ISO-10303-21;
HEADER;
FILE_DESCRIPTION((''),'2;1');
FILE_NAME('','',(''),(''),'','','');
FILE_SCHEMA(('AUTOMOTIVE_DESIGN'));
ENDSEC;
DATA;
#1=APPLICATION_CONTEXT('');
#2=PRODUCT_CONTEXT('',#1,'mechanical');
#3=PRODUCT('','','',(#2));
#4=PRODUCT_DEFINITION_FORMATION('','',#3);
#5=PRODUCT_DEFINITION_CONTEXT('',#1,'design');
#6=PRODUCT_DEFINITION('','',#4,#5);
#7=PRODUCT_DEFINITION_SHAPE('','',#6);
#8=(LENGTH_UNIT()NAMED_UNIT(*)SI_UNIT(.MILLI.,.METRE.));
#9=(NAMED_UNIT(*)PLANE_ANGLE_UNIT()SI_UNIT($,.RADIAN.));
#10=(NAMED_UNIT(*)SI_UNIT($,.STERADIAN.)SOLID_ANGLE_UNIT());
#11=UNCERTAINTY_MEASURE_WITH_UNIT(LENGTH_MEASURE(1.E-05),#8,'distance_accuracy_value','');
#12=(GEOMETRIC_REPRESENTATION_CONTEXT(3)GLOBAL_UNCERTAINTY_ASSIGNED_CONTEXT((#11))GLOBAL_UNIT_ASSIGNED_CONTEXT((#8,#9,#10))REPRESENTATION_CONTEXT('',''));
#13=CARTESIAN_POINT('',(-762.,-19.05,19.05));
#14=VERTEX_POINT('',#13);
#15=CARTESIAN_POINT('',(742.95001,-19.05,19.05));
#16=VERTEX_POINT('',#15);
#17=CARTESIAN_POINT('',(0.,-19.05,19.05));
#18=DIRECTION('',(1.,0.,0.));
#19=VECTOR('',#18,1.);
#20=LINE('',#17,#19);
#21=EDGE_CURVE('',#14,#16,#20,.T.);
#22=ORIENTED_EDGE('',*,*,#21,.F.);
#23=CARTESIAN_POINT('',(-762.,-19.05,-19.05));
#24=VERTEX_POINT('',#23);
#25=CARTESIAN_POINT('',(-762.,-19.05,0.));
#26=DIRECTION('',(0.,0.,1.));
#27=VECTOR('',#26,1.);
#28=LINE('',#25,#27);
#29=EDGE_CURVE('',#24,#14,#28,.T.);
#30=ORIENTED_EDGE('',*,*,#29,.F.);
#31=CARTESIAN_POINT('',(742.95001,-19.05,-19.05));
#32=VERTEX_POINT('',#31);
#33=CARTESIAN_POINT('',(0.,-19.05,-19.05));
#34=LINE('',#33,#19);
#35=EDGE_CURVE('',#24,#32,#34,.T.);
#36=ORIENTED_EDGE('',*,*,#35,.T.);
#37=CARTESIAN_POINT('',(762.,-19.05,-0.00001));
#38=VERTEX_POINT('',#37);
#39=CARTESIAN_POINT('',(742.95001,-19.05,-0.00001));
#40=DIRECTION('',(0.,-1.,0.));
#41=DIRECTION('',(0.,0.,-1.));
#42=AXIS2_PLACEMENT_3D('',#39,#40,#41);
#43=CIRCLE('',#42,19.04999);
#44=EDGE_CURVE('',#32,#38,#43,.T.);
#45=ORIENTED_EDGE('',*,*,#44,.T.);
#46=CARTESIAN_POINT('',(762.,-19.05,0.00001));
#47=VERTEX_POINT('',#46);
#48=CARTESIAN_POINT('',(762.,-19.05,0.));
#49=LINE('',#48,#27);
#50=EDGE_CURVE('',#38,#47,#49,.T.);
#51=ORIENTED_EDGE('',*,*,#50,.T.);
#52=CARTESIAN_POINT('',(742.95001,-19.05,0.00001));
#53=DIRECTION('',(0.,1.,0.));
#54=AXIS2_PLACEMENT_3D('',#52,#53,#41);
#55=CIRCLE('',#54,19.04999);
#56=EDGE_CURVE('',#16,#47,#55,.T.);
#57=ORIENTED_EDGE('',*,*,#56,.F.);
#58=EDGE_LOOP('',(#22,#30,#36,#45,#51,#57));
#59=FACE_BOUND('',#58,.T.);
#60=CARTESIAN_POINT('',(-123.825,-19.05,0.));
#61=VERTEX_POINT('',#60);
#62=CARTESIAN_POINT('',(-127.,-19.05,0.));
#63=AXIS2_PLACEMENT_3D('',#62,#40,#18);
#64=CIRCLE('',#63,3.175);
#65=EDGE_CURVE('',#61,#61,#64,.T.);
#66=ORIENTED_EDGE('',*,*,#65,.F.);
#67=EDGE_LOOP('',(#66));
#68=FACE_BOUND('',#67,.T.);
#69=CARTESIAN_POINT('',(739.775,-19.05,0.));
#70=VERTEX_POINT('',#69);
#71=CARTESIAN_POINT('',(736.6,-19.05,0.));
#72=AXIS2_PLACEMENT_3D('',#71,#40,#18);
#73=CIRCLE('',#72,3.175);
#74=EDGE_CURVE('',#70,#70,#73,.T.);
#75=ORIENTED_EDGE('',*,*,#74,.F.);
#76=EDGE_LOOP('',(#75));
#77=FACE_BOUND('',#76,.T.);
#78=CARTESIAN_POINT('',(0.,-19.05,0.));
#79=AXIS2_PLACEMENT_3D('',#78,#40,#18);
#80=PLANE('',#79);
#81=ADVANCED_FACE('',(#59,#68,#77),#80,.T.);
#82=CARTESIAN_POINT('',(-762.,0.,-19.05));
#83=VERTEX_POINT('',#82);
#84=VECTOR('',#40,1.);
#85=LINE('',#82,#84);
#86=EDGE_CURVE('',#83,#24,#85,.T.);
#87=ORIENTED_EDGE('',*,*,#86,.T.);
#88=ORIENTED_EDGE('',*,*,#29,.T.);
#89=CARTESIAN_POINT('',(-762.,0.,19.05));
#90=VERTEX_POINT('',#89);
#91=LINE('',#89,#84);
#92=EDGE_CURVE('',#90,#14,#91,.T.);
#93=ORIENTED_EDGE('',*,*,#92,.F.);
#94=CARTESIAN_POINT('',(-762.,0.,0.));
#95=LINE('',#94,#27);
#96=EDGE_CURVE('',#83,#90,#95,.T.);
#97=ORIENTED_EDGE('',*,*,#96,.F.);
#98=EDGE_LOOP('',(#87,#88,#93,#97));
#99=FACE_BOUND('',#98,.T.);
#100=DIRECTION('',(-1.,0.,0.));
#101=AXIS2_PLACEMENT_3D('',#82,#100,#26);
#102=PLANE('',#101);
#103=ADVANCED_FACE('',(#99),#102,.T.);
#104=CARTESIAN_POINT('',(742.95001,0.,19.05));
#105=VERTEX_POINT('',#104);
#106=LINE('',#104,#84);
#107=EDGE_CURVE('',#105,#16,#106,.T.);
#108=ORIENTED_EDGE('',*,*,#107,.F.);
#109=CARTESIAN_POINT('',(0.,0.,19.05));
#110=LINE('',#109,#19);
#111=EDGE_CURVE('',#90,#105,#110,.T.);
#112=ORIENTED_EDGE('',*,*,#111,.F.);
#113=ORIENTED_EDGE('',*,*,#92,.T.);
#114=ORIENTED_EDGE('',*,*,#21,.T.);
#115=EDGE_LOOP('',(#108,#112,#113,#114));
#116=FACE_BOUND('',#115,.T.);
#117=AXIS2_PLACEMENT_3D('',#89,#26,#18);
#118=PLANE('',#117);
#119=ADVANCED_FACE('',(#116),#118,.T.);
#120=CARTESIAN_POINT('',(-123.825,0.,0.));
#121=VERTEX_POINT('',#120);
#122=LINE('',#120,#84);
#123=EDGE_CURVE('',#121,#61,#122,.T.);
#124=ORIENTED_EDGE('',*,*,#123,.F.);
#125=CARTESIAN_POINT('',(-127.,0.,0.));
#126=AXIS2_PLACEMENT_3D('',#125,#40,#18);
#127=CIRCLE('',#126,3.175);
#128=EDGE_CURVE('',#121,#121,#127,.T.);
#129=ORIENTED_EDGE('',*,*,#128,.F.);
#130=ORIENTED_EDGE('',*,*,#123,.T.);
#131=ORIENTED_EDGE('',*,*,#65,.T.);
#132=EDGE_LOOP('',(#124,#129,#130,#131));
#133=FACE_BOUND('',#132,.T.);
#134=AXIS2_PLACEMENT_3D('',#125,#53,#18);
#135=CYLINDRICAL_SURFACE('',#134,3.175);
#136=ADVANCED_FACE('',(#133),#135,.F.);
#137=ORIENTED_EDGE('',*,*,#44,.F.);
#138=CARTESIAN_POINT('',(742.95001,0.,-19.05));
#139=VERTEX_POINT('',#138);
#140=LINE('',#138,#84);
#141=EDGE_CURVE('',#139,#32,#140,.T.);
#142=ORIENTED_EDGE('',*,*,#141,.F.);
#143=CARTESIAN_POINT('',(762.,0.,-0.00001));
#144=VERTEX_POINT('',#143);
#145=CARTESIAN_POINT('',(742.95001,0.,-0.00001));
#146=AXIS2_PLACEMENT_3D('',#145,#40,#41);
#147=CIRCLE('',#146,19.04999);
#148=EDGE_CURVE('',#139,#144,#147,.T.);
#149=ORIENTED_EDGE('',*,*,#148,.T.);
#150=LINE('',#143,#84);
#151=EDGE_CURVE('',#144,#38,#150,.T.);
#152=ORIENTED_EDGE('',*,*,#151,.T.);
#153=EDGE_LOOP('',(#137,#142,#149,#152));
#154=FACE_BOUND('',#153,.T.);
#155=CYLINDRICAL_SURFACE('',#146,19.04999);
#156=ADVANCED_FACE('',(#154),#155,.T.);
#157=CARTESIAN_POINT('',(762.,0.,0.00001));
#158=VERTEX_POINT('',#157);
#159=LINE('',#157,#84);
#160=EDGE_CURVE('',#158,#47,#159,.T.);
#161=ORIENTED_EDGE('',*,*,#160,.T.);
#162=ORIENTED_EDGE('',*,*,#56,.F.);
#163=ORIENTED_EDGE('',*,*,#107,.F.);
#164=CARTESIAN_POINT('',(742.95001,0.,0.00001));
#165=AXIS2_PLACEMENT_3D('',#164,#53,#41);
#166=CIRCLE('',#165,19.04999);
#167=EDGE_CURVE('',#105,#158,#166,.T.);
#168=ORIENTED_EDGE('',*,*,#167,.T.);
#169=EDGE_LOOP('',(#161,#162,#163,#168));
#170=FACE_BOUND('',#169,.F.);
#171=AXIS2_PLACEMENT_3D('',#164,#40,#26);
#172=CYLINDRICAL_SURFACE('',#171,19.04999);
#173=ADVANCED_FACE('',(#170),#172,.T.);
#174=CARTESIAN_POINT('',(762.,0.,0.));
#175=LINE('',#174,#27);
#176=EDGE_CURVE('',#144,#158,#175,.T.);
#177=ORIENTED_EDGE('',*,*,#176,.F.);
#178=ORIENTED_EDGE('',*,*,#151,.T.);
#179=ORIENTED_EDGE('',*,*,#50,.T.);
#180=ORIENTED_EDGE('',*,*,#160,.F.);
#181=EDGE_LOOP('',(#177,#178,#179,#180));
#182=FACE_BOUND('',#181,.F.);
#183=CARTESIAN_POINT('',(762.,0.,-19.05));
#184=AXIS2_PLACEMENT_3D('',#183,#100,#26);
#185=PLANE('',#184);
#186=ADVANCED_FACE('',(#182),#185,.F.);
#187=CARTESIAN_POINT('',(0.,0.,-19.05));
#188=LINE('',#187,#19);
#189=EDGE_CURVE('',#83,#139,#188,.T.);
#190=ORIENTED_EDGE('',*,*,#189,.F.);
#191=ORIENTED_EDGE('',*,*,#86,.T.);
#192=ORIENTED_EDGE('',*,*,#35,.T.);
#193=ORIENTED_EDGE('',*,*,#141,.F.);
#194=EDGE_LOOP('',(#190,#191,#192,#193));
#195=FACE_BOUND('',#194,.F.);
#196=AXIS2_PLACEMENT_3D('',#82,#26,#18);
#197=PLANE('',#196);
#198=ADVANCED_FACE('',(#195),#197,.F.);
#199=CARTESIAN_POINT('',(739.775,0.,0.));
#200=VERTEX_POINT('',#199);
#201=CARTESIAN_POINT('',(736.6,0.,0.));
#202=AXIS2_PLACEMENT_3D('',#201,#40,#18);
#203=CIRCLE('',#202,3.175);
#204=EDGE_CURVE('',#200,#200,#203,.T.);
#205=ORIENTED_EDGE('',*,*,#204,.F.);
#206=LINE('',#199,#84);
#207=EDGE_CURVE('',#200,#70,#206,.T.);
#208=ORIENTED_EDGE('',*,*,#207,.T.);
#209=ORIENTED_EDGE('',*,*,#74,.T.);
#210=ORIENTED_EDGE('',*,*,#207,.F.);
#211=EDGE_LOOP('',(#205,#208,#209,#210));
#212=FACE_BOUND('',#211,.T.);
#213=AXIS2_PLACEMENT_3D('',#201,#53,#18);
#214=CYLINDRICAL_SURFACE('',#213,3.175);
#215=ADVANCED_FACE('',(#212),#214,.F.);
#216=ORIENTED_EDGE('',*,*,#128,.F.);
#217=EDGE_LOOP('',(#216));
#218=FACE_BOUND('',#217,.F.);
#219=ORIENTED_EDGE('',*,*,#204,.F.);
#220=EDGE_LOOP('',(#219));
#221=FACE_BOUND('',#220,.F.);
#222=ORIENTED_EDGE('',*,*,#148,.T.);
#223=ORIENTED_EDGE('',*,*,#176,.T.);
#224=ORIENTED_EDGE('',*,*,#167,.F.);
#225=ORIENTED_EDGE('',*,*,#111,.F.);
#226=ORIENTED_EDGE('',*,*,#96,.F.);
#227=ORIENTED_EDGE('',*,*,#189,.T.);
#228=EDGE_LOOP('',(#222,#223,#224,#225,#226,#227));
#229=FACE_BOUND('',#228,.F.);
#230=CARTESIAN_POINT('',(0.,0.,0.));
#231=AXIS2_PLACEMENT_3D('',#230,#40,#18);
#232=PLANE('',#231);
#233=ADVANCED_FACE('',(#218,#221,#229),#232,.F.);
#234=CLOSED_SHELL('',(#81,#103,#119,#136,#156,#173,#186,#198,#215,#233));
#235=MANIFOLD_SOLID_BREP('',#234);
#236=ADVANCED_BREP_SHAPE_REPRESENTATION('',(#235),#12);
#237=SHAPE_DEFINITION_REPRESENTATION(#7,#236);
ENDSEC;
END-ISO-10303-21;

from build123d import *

# Parameters (mm, degrees)
F0_W     = 1524
F0_H     = 38.1
F0_R     = 3.175
F1_DEPTH = 19.05
F2_R     = 19.04999


# Not quite as in the source:
# - a fillet or chamfer is up to 0.001 mm smaller than in the source, because OpenCascade refuses the exact size


with BuildPart() as f1:
    # F0 (on Front) → F1 (new body)
    with BuildSketch(Plane.XZ):
        Rectangle(F0_W, F0_H)
        with Locations((-127, 0)):
            Circle(F0_R, mode=Mode.SUBTRACT)
        with Locations((736.6, 0)):
            Circle(F0_R, mode=Mode.SUBTRACT)
    extrude(amount=F1_DEPTH)

    # F2 (radius 19.05 in the source; OpenCascade refuses exactly that, so slightly less here)
    f2_edges = [f1.edges().sort_by_distance(p)[0] for p in [
        (762, -9.525, 19.05),
        (762, -9.525, -19.05),
    ]]
    fillet(f2_edges, radius=F2_R)


solid = f1.part
